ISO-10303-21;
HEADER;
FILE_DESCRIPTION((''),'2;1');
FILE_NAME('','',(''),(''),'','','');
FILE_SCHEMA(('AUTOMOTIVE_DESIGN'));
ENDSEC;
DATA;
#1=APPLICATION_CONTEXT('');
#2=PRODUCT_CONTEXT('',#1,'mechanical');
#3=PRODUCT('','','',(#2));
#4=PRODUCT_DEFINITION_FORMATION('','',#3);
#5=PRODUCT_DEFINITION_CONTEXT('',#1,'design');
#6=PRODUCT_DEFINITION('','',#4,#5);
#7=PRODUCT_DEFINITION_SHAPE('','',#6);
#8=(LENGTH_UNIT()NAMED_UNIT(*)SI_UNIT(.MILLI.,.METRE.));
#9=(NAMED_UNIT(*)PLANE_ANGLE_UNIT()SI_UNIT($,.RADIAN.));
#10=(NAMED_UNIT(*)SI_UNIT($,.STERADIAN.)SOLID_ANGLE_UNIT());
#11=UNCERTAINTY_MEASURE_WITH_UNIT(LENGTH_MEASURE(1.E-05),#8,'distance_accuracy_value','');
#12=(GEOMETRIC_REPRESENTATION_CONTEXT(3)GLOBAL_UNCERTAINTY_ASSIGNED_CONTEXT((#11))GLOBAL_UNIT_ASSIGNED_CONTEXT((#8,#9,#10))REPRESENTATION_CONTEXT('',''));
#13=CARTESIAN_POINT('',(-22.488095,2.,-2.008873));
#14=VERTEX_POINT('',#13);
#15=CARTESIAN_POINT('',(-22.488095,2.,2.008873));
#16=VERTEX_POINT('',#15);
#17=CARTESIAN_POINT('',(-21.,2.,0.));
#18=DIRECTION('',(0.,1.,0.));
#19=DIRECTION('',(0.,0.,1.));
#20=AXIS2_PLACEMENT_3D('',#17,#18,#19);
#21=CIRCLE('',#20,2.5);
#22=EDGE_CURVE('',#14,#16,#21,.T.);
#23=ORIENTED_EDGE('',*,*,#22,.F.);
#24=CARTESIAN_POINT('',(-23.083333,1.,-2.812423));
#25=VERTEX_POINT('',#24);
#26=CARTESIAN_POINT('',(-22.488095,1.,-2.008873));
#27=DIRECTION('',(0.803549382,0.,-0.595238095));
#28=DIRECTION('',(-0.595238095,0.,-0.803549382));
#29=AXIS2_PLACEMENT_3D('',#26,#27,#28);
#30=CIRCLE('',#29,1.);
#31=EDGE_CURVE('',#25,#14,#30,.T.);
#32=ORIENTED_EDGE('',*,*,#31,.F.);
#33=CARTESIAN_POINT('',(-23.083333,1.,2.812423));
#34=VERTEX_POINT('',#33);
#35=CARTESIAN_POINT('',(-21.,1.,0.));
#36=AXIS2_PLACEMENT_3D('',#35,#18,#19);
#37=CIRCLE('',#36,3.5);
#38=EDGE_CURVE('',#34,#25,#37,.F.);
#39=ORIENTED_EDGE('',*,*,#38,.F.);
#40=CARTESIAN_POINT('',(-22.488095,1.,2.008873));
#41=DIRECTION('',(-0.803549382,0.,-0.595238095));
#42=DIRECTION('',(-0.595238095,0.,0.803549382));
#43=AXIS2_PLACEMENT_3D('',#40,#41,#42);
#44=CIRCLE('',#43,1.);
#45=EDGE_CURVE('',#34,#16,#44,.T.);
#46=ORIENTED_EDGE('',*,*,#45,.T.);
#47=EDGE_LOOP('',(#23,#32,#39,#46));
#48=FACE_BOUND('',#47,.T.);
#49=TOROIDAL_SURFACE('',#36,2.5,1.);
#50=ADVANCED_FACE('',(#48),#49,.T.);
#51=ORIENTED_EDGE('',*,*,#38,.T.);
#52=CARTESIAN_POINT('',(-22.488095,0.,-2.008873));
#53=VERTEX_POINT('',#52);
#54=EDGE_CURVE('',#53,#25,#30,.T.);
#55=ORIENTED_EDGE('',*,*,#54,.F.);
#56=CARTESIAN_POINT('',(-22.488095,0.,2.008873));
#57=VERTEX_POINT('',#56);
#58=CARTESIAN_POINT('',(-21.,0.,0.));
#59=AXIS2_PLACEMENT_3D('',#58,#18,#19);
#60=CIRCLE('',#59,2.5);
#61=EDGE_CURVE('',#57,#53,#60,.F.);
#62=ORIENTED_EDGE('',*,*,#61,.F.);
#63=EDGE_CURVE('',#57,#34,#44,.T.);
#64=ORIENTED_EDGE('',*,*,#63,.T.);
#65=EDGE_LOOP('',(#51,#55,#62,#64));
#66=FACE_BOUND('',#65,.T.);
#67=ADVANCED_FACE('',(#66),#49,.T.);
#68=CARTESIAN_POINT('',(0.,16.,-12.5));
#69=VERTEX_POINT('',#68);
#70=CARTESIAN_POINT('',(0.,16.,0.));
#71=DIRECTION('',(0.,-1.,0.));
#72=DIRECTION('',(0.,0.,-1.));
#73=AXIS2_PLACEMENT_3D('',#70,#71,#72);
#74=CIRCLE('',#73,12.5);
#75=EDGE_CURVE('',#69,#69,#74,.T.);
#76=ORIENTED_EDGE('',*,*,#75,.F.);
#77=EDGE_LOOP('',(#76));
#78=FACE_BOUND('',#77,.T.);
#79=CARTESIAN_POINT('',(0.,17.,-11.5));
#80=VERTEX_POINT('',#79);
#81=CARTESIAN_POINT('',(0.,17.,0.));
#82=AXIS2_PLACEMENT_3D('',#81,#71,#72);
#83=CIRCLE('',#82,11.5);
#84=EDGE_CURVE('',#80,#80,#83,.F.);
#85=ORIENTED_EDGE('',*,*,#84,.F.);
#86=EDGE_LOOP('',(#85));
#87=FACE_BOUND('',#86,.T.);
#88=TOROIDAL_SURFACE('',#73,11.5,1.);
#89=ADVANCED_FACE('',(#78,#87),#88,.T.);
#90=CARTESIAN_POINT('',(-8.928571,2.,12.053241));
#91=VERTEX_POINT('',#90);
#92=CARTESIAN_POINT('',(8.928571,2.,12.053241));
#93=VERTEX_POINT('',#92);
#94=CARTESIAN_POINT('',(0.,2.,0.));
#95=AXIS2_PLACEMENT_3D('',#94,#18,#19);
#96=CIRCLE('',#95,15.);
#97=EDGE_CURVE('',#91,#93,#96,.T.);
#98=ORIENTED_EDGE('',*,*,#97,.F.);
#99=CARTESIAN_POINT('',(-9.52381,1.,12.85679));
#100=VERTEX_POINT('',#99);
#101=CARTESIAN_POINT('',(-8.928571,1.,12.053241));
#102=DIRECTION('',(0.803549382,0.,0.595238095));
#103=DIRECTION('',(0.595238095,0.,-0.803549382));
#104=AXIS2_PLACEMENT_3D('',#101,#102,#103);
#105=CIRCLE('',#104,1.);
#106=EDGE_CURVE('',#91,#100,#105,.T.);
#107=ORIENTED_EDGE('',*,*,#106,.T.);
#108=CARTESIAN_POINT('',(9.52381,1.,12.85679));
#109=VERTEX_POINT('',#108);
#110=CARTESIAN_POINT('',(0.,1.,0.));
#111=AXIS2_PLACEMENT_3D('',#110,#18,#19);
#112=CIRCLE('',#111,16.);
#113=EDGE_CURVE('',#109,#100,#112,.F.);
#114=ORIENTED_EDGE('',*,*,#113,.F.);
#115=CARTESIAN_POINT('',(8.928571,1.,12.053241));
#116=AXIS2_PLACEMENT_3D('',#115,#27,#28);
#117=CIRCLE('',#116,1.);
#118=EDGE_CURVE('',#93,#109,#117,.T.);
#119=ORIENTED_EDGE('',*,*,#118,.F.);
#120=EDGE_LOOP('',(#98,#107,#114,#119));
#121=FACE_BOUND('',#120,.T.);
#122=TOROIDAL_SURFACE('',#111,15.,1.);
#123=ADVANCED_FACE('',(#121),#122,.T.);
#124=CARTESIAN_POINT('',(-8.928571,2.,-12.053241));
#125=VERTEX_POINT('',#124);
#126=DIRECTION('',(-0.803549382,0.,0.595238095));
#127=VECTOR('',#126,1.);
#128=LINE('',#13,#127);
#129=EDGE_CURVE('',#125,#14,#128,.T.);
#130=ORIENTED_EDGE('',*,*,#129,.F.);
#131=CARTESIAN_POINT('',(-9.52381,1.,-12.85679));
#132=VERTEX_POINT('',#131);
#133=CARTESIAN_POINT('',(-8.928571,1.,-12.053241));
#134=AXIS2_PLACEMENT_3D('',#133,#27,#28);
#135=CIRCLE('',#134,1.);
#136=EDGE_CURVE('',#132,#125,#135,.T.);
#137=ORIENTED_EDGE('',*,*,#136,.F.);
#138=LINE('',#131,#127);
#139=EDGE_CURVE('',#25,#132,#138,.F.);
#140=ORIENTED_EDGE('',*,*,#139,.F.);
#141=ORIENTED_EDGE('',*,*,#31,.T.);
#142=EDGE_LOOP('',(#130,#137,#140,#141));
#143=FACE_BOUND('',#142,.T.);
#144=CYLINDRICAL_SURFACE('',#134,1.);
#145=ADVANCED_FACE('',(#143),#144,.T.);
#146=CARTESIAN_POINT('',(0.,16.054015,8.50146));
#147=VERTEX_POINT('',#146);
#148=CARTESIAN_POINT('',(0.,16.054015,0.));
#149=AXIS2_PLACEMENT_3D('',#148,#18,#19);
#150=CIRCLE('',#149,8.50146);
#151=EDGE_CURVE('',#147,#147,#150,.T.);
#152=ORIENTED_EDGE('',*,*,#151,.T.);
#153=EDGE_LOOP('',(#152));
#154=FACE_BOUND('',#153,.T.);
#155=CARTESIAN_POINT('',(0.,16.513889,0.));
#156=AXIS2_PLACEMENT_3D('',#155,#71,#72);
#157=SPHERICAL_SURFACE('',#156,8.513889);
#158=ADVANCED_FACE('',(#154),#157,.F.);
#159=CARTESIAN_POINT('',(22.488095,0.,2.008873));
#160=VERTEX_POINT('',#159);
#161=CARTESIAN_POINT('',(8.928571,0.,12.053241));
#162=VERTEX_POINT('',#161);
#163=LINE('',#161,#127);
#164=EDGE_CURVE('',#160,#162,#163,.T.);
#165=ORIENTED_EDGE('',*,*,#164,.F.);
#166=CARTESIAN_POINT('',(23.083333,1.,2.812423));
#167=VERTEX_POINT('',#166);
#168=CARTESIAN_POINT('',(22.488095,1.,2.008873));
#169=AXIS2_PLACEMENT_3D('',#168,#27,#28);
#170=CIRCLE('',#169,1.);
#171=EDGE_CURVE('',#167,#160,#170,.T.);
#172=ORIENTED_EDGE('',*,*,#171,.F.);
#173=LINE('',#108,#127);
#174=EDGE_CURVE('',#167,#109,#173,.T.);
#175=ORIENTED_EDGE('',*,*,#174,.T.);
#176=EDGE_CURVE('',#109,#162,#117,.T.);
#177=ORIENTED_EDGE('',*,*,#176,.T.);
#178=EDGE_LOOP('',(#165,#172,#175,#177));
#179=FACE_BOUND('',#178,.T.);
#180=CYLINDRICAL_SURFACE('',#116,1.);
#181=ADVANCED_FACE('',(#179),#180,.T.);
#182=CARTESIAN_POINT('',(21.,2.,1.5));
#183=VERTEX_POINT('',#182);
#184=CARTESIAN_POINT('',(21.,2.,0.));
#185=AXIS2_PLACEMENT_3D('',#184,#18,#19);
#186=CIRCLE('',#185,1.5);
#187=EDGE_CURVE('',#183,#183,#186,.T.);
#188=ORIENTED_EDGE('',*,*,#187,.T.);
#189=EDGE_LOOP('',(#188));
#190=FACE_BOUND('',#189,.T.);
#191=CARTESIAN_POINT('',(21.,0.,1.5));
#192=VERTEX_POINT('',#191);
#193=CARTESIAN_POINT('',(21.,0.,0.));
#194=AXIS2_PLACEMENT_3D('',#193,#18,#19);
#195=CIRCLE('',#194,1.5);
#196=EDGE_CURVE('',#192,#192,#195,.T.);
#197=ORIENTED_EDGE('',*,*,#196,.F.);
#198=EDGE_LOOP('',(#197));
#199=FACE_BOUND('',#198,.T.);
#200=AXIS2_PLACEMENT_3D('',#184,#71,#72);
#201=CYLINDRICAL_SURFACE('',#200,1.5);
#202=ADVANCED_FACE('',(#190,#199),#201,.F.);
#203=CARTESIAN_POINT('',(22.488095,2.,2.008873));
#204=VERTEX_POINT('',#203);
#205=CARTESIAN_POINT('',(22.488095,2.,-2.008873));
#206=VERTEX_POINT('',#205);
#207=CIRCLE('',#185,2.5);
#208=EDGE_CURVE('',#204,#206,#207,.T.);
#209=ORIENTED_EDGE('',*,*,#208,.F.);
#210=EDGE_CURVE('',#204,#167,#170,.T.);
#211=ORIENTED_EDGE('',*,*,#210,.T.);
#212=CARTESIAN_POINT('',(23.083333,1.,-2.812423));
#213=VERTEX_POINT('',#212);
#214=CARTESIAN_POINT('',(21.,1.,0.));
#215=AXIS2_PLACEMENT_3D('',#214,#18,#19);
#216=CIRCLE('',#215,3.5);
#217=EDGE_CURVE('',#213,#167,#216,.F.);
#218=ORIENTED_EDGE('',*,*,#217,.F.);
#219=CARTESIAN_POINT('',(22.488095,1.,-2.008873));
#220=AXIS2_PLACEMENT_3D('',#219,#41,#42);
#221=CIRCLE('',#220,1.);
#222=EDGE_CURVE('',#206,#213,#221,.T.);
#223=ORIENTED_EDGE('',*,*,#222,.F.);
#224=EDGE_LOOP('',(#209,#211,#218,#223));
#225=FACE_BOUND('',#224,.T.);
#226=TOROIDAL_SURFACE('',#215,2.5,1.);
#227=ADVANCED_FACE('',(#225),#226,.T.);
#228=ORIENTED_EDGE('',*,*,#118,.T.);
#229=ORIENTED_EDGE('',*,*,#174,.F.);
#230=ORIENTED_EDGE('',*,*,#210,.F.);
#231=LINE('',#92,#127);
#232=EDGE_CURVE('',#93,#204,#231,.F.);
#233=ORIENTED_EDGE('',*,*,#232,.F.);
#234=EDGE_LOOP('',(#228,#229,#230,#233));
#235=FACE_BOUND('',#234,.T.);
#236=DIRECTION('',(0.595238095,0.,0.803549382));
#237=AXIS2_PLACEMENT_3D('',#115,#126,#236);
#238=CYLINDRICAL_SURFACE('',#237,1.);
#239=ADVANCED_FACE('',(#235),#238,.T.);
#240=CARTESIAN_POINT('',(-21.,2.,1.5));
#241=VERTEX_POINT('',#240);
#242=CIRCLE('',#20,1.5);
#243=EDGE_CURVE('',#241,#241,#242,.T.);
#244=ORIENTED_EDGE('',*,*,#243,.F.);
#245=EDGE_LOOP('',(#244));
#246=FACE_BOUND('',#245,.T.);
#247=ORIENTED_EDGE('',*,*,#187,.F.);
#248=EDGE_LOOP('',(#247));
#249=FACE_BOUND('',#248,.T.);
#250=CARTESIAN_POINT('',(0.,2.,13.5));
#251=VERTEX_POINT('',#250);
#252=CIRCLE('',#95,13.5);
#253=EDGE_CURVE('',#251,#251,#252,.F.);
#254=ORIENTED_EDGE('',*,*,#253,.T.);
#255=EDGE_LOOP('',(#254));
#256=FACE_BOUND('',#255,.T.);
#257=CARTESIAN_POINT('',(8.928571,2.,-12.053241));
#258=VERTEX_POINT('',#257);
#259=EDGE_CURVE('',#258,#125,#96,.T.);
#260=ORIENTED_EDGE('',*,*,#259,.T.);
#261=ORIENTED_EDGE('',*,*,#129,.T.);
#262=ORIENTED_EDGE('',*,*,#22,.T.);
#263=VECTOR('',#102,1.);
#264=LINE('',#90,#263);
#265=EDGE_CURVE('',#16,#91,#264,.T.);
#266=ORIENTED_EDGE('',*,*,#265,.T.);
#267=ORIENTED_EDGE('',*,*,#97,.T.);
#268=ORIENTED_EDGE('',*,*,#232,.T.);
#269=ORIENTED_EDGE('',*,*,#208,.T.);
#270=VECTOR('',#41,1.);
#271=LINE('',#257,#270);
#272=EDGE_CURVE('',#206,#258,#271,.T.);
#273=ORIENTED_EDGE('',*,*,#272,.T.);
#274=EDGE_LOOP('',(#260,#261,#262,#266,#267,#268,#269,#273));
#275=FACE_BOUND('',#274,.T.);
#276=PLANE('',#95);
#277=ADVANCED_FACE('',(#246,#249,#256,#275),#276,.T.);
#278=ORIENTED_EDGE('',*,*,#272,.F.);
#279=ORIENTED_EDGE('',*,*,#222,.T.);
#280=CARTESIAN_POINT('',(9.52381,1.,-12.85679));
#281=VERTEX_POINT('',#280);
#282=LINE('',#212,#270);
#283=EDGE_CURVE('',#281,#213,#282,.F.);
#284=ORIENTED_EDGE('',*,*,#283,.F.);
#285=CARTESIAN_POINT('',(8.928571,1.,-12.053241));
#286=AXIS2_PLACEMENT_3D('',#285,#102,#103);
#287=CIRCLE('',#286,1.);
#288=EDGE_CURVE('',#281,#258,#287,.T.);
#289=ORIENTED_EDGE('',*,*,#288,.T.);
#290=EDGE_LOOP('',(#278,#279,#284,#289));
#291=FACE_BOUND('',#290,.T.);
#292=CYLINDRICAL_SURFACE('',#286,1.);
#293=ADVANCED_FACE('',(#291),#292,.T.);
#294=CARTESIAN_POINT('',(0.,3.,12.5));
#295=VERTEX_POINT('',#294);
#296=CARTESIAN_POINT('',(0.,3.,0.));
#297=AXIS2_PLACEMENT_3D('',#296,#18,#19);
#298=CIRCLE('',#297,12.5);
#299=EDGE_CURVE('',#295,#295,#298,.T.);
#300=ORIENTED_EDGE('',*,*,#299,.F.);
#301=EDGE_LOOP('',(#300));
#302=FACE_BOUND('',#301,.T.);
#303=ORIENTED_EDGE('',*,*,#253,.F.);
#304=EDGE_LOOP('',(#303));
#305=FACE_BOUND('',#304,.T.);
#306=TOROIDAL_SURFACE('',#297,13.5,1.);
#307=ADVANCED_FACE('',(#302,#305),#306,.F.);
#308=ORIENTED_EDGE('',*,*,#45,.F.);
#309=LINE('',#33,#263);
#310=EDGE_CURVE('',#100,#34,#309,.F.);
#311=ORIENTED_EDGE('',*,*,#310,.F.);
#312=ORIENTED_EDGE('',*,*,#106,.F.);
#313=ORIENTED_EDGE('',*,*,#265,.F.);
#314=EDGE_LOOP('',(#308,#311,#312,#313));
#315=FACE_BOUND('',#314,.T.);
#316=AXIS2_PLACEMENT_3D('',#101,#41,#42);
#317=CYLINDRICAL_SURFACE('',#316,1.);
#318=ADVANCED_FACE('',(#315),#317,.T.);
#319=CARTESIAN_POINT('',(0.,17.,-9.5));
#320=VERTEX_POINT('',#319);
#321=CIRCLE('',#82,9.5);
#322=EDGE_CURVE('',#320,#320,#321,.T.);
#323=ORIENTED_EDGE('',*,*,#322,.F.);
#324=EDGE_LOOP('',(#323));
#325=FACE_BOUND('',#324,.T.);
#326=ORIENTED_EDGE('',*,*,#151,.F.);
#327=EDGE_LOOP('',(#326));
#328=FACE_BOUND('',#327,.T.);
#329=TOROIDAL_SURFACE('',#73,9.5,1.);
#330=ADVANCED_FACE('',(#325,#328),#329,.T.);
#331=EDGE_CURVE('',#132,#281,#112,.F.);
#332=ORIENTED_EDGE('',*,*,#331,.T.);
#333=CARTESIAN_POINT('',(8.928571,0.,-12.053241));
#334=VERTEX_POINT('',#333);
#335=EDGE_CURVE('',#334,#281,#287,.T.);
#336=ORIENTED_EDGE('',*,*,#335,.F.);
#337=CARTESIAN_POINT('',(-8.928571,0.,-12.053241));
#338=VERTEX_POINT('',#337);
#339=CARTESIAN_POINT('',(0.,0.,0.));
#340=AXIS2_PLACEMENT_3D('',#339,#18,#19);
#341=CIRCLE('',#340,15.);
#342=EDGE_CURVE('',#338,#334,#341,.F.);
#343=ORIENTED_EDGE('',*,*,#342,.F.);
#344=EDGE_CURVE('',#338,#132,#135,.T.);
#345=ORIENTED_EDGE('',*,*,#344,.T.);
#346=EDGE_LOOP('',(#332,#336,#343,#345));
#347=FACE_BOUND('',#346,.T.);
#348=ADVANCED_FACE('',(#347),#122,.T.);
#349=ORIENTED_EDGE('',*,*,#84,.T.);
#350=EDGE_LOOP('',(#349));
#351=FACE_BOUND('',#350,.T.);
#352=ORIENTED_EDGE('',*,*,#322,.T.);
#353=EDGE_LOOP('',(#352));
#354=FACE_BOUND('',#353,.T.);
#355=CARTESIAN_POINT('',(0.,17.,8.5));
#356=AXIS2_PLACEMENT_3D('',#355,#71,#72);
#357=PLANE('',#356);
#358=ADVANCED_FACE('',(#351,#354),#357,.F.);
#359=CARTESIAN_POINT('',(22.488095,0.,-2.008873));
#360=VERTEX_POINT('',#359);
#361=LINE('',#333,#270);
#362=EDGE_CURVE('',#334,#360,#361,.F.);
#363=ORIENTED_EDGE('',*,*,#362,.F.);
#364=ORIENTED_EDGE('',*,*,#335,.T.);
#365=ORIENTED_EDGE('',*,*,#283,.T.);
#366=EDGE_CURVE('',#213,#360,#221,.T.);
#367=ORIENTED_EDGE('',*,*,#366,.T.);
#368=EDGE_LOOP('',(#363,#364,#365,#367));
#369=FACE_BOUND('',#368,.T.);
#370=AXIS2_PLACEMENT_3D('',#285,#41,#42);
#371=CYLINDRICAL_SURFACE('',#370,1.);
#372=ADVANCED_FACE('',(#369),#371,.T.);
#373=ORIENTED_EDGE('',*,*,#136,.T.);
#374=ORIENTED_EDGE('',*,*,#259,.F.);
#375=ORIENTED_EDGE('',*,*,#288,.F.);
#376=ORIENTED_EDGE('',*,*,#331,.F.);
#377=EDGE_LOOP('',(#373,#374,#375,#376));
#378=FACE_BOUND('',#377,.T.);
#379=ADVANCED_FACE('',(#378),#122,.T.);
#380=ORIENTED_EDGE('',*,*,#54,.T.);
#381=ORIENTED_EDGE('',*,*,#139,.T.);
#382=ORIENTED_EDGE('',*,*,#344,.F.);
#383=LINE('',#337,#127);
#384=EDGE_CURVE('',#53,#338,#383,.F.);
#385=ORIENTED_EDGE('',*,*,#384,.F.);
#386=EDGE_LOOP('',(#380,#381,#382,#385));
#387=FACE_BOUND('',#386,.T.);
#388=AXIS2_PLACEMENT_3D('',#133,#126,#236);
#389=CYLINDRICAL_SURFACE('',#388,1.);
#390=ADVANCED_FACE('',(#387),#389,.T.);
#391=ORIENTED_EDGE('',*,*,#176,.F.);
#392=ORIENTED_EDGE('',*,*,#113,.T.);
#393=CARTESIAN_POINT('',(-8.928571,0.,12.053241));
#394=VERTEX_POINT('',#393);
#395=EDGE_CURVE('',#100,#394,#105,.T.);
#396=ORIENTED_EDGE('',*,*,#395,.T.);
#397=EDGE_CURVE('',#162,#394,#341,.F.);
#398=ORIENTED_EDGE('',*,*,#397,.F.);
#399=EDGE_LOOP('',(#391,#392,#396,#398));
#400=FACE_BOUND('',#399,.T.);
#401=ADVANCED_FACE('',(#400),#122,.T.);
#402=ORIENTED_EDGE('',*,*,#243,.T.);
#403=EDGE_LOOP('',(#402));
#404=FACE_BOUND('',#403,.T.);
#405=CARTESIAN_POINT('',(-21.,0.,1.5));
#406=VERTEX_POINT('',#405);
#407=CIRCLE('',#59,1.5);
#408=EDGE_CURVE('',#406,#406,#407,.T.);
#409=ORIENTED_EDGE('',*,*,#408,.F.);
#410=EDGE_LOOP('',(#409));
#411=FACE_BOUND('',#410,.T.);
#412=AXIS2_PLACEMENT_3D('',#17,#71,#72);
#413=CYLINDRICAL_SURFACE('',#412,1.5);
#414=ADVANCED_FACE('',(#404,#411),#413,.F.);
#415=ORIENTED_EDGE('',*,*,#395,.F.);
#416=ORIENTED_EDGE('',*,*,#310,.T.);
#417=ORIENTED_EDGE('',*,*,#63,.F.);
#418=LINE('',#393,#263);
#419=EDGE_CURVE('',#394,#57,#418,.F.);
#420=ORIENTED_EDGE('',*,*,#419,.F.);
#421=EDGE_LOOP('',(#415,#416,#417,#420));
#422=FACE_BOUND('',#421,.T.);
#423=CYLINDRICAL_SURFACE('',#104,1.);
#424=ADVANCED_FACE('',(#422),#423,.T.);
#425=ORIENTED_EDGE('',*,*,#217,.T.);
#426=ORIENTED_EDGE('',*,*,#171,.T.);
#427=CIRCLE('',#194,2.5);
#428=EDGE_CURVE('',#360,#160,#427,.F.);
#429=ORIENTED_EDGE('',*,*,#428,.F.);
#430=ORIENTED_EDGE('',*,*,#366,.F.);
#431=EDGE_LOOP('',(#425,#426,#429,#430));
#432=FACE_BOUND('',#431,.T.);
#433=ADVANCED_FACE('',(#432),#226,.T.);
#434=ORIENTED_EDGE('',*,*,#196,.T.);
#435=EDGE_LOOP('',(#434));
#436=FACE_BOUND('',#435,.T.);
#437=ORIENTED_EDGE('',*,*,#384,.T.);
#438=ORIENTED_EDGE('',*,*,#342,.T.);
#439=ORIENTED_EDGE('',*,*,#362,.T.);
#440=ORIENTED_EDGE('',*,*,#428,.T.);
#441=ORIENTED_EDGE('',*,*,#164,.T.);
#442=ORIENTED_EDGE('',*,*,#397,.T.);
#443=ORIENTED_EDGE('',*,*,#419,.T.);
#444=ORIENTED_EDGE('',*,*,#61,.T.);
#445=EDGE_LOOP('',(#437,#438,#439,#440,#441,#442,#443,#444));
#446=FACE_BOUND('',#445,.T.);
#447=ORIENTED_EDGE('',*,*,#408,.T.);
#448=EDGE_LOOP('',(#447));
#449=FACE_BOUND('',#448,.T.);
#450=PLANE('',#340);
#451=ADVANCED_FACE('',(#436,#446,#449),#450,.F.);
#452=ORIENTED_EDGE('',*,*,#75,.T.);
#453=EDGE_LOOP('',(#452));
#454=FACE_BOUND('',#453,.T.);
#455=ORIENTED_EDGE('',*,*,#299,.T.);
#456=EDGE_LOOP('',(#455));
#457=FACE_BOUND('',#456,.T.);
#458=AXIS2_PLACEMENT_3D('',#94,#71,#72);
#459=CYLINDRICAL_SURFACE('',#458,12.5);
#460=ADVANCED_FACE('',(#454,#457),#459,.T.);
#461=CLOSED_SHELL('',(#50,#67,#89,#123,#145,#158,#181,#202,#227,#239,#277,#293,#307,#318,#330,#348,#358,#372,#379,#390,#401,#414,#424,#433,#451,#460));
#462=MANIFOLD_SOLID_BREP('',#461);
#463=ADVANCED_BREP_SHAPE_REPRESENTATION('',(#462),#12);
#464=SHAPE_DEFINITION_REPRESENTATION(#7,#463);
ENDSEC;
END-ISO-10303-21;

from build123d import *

# Parameters (mm, degrees)
SKETCH1_R           = 3.5
SKETCH1_R_2         = 1.5
SKETCH1_R_3         = 16
BOSS_EXTRUDE1_DEPTH = 2
FILLET1_R           = 1


with BuildPart() as part:
    # Sketch1 → Boss-Extrude1 (new body)
    # profile 1 of 5: a face of its own
    with BuildSketch(Plane(origin=(0, 0, 0), x_dir=(1, 0, 0), z_dir=(0, 1, 0))):
        with Locations((-21, 0)):
            Circle(SKETCH1_R)
        with Locations(Location((-21, 0, 0), (0, 0, 270))):
            Circle(SKETCH1_R_2, mode=Mode.SUBTRACT)
    # profile 2 of 5: a face of its own
    with BuildSketch(Plane(origin=(0, 0, 0), x_dir=(1, 0, 0), z_dir=(0, 1, 0))):
        with BuildLine():
            ThreePointArc((-9.523809524, -12.856790119), (-16, 0), (-9.523809524, 12.856790119))
            Line((-9.523809524, 12.856790119), (-23.083333333, 2.812422838))
            ThreePointArc((-23.083333333, 2.812422838), (-19.425463031, 3.125833222), (-17.5, 0))
            ThreePointArc((-17.5, 0), (-19.425463031, -3.125833222), (-23.083333333, -2.812422838))
            Line((-23.083333333, -2.812422838), (-9.523809524, -12.856790119))
        make_face()
    # profile 3 of 5: a face of its own
    with BuildSketch(Plane(origin=(0, 0, 0), x_dir=(1, 0, 0), z_dir=(0, 1, 0))):
        Circle(SKETCH1_R_3)
    # profile 4 of 5: a face of its own
    with BuildSketch(Plane(origin=(0, 0, 0), x_dir=(1, 0, 0), z_dir=(0, 1, 0))):
        with BuildLine():
            Line((23.083333333, 2.812422838), (9.523809524, 12.856790119))
            ThreePointArc((9.523809524, 12.856790119), (14.289523302, 7.197883287), (16, 0))
            ThreePointArc((16, 0), (14.289523302, -7.197883287), (9.523809524, -12.856790119))
            Line((9.523809524, -12.856790119), (23.083333333, -2.812422838))
            ThreePointArc((23.083333333, -2.812422838), (17.5, 0), (23.083333333, 2.812422838))
        make_face()
    # profile 5 of 5: a face of its own
    with BuildSketch(Plane(origin=(0, 0, 0), x_dir=(1, 0, 0), z_dir=(0, 1, 0))):
        with Locations((21, 0)):
            Circle(SKETCH1_R)
        with Locations(Location((21, 0, 0), (0, 0, 270))):
            Circle(SKETCH1_R_2, mode=Mode.SUBTRACT)
    extrude(amount=BOSS_EXTRUDE1_DEPTH)

    # Sketch3 → Revolve1 (revolve)
    with BuildSketch(Plane(origin=(0, 0, 0), x_dir=(0, 0, -1), z_dir=(1, 0, 0)), mode=Mode.PRIVATE) as revolve1_sk:
        with BuildLine():
            Line((-8.5, 17), (-12.5, 17))
            Line((-12.5, 17), (-12.5, 2))
            Line((-12.5, 2), (0, 2))
            Line((0, 2), (0, 8))
            ThreePointArc((0, 8), (-6.189709202, 10.668052421), (-8.5, 17))
        make_face()
    revolve(revolve1_sk.sketch.rotate(Axis((0, 2, 0), (0, 1, 0)), 180), axis=Axis((0, 2, 0), (0, 1, 0)))

    # Fillet1
    fillet1_edges = [part.edges().sort_by_distance(p)[0] for p in [
        (0, 2, 12.5),
        (0, 17, 12.5),
        (0, 17, 8.5),
        (16.303571429, 0, -7.834606479),
        (16.303571429, 2, -7.834606479),
        (24.5, 0, 0),
        (24.5, 2, 0),
        (16.303571429, 0, 7.834606479),
        (16.303571429, 2, 7.834606479),
        (0, 0, 16),
        (0, 2, 16),
        (-16.303571429, 0, 7.834606479),
        (-16.303571429, 2, 7.834606479),
        (-24.5, 0, 0),
        (-24.5, 2, 0),
        (-16.303571429, 0, -7.834606479),
        (-16.303571429, 2, -7.834606479),
        (0, 0, -16),
        (0, 2, -16),
    ]]
    fillet(fillet1_edges, radius=FILLET1_R - 0.0001)  # a hair under: the kernel refuses the full size


solid = part.part
